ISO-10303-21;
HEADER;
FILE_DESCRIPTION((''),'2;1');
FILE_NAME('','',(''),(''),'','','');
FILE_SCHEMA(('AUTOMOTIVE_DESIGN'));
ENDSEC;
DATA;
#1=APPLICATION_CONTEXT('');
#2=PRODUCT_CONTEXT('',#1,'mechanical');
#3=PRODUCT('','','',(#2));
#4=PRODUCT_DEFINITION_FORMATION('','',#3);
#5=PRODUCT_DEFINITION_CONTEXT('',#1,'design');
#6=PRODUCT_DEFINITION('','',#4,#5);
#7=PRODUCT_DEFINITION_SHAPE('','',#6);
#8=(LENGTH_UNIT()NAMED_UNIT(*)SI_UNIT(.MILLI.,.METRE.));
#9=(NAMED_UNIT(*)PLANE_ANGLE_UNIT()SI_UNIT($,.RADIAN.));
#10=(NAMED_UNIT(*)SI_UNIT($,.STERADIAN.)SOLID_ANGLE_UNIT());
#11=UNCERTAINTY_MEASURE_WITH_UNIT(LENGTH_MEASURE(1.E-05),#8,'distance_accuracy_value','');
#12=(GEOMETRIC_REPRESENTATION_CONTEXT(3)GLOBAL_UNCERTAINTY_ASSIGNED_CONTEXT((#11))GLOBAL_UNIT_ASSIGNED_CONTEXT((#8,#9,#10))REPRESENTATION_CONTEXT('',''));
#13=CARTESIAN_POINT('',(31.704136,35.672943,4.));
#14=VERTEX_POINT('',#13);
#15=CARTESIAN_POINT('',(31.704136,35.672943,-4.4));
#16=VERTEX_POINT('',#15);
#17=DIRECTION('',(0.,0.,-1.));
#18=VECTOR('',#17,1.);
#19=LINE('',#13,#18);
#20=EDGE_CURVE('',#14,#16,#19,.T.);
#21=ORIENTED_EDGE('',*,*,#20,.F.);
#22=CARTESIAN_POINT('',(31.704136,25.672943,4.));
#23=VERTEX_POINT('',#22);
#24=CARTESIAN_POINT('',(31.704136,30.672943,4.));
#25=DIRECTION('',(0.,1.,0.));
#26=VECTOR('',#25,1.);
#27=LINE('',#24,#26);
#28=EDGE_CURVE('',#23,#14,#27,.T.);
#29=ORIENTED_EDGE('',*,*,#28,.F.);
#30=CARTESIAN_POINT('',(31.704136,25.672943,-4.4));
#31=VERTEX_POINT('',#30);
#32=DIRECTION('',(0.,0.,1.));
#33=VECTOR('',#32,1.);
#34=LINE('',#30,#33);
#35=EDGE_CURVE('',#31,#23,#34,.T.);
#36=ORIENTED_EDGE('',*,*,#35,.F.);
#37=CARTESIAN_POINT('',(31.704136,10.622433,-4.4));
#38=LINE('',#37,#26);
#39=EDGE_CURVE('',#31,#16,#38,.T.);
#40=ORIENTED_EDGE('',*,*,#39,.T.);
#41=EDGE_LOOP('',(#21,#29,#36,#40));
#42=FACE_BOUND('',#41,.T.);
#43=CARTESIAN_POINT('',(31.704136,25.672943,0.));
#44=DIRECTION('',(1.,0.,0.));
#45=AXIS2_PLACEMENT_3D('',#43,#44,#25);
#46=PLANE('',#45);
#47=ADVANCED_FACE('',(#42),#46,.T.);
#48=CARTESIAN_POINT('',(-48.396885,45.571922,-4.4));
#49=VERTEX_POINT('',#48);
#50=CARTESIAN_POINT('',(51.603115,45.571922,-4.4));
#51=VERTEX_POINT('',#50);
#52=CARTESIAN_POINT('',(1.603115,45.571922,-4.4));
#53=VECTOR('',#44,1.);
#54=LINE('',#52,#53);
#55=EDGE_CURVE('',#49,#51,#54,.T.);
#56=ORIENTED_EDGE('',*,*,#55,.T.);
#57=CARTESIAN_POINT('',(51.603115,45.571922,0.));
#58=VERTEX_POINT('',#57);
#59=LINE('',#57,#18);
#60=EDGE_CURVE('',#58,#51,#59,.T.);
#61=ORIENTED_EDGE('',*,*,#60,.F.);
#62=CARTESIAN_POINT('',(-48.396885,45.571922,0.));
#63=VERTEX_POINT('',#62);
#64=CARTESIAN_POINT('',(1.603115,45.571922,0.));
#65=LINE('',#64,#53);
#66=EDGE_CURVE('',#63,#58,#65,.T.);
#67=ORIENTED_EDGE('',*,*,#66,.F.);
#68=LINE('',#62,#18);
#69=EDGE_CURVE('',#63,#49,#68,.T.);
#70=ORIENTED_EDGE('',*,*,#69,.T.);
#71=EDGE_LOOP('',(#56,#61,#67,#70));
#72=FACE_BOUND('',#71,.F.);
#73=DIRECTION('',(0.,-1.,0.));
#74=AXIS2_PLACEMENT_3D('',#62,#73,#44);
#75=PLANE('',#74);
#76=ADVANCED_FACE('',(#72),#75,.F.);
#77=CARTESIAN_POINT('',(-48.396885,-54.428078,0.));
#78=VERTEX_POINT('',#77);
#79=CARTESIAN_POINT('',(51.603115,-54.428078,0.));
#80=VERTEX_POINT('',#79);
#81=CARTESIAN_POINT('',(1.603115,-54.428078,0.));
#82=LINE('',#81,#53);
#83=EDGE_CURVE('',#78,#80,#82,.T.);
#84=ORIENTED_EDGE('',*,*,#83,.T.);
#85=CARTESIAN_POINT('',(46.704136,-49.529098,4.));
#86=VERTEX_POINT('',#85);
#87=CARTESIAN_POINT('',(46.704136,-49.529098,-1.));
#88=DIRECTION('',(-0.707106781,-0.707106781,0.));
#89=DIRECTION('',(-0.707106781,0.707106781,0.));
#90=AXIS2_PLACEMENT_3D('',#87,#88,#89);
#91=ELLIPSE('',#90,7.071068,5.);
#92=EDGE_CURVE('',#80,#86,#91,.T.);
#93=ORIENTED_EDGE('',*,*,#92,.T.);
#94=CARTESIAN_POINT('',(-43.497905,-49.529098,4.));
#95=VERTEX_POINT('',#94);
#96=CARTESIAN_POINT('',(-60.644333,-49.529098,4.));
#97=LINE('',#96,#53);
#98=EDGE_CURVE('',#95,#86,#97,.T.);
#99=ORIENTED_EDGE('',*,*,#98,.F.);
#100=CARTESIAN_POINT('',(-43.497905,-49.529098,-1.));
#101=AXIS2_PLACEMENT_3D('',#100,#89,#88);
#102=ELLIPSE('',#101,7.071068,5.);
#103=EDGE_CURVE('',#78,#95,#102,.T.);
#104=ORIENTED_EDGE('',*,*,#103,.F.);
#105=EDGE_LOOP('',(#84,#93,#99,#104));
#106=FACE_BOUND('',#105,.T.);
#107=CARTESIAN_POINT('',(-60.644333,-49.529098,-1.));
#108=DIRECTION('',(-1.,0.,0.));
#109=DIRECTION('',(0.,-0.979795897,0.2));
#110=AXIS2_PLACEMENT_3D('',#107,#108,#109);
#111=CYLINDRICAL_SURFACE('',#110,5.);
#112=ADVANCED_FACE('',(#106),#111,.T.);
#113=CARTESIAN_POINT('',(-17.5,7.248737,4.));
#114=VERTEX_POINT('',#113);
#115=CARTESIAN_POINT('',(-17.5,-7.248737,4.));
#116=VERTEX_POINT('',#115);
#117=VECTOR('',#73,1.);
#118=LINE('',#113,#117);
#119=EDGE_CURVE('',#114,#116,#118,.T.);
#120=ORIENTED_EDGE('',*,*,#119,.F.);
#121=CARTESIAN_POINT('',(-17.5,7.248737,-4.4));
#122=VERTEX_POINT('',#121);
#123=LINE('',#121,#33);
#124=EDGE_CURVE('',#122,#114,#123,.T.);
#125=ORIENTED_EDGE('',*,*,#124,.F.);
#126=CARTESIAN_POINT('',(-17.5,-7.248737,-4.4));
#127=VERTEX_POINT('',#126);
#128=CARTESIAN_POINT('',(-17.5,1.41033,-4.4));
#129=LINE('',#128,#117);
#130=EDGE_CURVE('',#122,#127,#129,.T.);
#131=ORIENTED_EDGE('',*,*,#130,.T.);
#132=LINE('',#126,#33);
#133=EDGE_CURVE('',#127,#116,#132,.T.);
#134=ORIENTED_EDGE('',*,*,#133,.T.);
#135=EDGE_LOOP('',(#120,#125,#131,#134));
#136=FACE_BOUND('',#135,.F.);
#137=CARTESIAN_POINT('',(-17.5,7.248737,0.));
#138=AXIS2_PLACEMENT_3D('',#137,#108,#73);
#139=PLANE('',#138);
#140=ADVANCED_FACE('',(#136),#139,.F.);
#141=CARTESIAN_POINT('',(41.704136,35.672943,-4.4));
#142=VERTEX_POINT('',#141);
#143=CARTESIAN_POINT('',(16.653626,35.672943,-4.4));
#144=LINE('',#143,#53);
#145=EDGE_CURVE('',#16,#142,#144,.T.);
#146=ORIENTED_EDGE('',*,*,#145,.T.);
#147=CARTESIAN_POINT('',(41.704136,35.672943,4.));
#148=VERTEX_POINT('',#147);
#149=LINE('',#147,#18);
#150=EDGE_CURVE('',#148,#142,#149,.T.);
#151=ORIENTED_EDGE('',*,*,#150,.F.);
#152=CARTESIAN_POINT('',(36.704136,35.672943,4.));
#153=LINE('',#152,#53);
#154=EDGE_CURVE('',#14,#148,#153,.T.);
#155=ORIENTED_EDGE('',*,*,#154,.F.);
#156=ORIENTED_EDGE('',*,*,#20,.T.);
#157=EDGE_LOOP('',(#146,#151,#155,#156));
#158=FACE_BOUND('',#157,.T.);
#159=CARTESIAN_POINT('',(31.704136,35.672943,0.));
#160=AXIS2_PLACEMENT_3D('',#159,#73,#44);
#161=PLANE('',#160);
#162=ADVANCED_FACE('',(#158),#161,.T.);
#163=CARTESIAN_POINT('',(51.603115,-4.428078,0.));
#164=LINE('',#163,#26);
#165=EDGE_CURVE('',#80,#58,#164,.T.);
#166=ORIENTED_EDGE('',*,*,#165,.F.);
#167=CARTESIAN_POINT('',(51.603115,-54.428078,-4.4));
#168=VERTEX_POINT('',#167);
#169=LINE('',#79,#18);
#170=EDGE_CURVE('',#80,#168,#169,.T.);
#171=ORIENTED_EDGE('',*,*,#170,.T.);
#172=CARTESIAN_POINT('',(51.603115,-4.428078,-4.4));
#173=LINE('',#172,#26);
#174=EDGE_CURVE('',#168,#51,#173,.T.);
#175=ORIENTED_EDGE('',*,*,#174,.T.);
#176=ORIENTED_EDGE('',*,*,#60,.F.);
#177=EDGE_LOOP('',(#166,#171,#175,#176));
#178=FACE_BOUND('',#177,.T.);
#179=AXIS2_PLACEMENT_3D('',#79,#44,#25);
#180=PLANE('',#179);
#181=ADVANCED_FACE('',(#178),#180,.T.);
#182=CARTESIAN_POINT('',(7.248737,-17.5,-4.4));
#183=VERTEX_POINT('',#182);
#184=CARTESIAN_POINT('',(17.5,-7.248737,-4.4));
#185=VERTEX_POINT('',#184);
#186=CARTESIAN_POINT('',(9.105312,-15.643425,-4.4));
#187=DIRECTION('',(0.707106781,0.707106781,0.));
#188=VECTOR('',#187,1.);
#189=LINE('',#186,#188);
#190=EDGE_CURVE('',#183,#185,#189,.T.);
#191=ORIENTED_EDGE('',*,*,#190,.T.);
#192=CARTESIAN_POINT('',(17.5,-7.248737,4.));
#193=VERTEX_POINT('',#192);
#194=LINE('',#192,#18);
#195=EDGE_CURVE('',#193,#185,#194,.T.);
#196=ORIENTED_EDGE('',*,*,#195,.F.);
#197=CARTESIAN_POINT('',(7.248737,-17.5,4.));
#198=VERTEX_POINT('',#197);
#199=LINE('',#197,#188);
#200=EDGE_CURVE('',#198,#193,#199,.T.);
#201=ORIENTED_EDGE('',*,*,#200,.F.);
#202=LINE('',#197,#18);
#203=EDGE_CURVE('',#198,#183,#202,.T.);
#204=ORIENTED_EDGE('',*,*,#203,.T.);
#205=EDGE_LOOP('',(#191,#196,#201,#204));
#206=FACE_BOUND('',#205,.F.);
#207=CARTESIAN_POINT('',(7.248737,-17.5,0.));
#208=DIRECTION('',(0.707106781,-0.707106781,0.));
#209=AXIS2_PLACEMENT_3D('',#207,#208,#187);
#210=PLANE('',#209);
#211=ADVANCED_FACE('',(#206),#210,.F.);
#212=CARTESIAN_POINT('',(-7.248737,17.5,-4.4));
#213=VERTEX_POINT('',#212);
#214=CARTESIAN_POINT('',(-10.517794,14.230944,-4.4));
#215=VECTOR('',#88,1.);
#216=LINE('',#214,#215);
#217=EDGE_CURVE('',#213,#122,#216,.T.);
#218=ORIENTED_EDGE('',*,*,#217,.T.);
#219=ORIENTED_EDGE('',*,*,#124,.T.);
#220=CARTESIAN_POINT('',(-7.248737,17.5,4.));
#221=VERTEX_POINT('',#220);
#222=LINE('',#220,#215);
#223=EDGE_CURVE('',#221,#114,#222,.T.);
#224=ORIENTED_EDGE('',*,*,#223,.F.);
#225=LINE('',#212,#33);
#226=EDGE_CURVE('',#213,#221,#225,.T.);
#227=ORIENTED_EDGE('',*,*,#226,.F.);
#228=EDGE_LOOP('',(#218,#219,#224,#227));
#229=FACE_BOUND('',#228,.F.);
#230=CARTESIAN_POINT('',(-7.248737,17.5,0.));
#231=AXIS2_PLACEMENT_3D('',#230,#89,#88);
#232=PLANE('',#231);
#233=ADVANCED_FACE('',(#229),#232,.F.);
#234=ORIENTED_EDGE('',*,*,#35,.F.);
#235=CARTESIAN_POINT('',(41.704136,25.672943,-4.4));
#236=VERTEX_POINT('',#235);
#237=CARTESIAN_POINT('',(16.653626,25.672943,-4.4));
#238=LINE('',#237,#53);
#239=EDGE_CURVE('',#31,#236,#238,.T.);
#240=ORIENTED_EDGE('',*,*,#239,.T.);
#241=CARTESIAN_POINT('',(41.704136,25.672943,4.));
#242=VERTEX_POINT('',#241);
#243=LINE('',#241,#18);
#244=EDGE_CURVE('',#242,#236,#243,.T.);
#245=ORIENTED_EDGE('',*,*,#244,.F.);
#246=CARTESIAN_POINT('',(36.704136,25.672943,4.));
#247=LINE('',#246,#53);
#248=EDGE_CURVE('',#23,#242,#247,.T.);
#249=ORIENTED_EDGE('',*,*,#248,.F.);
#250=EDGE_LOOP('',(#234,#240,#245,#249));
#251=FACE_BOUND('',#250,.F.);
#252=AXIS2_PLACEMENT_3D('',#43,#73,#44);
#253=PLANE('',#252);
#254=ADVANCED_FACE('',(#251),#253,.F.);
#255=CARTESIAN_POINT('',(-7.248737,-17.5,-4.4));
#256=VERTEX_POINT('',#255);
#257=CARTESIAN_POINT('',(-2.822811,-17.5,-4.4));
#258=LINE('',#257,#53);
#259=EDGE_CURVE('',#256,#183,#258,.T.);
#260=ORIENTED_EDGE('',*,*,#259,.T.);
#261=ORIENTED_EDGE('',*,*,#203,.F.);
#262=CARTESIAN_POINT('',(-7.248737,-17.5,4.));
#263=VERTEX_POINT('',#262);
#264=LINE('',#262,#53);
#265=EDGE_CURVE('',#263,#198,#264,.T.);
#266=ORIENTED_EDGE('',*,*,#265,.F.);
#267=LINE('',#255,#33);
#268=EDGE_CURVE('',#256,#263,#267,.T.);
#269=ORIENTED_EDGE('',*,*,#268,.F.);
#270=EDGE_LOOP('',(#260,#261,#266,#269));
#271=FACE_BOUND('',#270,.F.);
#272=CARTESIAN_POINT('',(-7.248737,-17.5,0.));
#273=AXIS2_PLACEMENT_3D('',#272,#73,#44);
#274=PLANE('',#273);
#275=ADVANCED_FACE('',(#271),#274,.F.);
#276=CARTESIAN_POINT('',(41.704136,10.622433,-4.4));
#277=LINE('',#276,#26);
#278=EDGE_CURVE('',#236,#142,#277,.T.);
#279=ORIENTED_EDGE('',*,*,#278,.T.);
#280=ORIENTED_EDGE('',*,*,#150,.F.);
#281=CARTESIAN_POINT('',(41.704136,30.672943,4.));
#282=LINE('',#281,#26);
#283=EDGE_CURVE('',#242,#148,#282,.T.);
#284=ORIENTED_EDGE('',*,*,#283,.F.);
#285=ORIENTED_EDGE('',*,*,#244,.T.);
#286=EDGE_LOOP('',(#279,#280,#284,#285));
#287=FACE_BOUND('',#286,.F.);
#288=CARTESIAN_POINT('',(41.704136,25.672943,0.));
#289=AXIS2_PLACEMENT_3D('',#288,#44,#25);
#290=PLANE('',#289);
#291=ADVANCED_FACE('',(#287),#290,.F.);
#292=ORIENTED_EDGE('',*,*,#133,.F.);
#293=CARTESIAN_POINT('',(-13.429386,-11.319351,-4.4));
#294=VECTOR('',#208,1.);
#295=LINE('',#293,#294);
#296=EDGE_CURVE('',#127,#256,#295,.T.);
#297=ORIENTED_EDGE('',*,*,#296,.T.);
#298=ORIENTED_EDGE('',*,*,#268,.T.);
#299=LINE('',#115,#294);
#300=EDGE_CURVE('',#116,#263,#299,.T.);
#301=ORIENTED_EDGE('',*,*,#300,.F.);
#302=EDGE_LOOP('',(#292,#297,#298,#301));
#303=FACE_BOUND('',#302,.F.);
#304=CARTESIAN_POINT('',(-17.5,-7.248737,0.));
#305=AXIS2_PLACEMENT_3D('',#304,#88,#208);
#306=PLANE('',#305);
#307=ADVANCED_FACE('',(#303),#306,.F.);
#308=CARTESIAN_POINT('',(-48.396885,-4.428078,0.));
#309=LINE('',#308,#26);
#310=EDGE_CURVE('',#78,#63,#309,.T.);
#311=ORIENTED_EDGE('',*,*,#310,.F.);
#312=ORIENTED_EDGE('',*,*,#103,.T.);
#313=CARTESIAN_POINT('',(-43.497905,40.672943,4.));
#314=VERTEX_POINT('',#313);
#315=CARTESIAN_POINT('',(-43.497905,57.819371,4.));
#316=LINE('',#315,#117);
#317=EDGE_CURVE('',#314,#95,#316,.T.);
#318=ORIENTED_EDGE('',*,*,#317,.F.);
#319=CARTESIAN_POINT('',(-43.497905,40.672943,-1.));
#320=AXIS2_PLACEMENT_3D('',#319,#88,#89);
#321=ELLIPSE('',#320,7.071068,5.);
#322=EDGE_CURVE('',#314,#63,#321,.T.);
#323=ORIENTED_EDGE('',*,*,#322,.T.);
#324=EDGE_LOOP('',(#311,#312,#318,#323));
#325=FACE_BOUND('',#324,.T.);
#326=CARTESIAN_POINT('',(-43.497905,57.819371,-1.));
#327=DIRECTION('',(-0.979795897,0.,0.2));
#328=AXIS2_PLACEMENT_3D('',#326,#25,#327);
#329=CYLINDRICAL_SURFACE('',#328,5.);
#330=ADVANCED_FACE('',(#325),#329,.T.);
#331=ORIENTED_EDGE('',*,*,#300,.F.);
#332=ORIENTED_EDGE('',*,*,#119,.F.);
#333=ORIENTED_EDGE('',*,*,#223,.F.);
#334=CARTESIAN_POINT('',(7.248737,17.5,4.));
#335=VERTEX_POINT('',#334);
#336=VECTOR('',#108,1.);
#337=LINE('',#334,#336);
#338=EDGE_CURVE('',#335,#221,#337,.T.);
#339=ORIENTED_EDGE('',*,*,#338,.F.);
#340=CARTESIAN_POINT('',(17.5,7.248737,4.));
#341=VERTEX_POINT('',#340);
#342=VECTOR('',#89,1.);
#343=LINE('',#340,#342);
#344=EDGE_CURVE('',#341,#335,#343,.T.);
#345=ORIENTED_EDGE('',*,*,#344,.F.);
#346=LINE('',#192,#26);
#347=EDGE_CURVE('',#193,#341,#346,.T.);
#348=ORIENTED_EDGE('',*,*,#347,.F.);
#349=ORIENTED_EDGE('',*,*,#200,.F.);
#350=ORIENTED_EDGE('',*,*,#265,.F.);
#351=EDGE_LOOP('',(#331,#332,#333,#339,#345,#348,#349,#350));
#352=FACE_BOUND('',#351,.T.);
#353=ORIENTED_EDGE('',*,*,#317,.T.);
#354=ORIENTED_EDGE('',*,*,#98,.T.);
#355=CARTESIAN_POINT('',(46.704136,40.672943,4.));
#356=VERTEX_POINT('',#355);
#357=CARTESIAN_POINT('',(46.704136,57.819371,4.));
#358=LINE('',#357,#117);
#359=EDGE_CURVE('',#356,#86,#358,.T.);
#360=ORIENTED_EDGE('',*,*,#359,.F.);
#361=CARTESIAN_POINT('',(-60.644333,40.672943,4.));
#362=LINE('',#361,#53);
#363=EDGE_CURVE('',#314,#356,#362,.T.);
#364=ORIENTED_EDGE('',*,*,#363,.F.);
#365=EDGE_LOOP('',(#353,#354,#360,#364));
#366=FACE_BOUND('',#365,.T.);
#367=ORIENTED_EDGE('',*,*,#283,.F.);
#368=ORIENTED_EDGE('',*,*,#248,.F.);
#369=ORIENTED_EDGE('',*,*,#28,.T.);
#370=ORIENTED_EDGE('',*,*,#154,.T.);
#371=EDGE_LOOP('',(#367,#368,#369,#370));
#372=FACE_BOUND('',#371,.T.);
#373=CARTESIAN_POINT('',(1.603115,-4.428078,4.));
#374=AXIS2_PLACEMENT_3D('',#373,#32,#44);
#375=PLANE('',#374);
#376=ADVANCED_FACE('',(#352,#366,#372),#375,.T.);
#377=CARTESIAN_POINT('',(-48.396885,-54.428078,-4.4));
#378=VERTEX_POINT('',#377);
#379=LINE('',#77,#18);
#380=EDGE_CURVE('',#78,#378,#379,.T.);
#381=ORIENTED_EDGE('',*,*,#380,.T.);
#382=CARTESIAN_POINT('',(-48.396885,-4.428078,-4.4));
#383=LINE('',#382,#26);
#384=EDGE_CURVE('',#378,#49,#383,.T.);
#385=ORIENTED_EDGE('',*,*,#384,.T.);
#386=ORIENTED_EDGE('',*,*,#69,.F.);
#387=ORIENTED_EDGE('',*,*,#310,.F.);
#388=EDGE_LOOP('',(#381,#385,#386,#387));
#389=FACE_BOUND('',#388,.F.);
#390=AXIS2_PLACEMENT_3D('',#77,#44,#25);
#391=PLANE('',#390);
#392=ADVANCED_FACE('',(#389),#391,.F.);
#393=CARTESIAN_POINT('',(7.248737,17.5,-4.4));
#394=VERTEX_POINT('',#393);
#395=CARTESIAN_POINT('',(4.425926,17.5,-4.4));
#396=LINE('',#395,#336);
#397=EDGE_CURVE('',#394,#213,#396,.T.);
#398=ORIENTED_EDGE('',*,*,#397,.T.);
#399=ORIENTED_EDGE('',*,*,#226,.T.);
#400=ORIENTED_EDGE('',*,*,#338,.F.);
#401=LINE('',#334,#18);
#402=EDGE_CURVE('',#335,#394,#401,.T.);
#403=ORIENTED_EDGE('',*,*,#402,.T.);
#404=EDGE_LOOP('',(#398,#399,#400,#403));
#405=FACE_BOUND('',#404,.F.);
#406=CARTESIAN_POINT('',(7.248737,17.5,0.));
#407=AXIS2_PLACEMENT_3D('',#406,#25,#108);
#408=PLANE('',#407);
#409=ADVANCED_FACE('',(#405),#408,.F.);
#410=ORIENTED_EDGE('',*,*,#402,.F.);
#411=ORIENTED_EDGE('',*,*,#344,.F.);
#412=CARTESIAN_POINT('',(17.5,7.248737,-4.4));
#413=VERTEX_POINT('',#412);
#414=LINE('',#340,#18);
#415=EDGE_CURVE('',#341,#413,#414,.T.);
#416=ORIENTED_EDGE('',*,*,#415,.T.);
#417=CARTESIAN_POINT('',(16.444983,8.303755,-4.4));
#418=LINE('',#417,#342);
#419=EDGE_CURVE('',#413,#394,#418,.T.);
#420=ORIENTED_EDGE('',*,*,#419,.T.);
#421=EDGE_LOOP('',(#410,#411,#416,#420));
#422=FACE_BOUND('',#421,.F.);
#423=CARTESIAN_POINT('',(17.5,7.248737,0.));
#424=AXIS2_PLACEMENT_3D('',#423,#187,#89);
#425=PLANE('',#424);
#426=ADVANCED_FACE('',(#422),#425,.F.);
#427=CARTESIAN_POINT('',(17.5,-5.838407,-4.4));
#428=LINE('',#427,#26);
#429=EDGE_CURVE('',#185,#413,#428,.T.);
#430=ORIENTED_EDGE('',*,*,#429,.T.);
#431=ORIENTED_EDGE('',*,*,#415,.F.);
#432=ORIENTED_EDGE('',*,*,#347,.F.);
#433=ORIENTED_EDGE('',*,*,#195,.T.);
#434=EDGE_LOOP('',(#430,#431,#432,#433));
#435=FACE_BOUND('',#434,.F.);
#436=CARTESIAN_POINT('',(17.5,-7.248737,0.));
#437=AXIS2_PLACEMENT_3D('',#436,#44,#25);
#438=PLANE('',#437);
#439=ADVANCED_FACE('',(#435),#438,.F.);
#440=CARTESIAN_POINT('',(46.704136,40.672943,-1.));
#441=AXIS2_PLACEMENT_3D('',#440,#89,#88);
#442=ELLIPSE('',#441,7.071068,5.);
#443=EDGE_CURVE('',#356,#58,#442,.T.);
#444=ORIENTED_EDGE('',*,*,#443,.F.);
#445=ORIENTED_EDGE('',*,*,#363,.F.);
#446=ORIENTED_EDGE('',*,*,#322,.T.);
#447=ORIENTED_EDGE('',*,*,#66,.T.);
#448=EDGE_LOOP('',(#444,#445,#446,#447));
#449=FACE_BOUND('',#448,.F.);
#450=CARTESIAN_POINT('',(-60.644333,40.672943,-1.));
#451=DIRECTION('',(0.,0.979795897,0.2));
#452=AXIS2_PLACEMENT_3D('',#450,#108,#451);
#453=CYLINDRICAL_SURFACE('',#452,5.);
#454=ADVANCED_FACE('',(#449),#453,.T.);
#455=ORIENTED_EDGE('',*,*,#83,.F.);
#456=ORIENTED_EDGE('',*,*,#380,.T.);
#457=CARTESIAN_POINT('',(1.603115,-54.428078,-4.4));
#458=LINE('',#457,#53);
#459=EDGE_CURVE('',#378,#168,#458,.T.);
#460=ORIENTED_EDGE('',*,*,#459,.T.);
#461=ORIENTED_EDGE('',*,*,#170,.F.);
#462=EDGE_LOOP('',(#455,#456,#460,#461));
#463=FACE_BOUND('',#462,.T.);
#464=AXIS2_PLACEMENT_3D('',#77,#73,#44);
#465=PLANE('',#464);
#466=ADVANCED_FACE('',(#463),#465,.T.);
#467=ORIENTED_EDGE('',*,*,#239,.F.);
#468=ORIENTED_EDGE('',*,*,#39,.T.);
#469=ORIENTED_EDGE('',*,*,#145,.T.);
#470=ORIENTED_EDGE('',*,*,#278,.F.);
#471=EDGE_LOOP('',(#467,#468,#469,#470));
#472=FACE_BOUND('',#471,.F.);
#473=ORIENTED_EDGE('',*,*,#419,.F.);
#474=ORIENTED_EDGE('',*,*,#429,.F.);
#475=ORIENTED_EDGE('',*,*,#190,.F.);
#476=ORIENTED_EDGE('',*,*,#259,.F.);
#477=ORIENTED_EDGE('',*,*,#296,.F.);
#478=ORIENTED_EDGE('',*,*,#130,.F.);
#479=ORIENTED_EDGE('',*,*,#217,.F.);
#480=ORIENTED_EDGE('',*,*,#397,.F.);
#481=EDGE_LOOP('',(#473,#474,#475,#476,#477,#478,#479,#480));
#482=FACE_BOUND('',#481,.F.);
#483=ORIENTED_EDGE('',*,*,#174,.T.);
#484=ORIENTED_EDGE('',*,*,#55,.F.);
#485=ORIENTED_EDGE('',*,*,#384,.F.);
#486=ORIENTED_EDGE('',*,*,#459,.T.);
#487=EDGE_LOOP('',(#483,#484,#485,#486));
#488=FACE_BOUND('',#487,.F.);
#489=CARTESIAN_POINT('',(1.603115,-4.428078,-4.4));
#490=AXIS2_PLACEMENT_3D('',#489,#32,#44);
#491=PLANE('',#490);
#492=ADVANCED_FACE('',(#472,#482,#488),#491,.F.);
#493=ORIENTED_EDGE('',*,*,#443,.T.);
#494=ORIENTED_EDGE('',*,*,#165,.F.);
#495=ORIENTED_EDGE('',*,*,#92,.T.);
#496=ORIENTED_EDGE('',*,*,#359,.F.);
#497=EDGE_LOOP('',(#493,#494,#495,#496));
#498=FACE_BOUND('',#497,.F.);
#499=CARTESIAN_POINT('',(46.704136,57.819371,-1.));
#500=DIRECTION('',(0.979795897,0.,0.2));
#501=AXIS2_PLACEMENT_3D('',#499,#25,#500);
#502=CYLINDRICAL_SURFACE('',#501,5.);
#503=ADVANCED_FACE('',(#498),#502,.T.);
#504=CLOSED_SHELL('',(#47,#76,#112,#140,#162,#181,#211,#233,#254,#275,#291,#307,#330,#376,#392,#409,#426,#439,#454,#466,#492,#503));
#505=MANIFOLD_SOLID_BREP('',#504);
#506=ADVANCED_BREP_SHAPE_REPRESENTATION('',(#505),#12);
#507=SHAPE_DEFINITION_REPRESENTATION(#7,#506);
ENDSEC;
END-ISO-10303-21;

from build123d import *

# Parameters (mm, degrees)
F0_W        = 100
F0_H        = 100
F1_DEPTH    = 4
F3_T1_DEPTH = 124.4948974279
F3_T3_DEPTH = 124.4948974279
F5_DEPTH    = 25
F4_W        = 10
F4_H        = 10
F6_DEPTH    = 25
F7_DEPTH    = 4.4


# Not quite as in the source:
# - a fillet or chamfer that OpenCascade refuses, or shapes differently, is made with other operations: its cross-section is extruded or revolved along the edge and cut away or added


with BuildPart() as f1:
    # F0 (on Top) → F1 (new body)
    with BuildSketch(Plane.XY):
        with Locations((1.60311535, -4.4280775759)):
            Rectangle(F0_W, F0_H)
    extrude(amount=F1_DEPTH)

    # F3: fillet of radius 5 on 4 edges, made by hand

    # F3_s2 → F3_t1 (cut)
    with BuildSketch(Plane.YZ.offset(-60.6443333639)):
        with BuildLine():
            ThreePointArc((-54.4280775759, 0), (-52.6913757505, 2.8729833462), (-49.5290980903, 4))
            Line((-49.5290980903, 4), (-54.4280775759, 4))
            Line((-54.4280775759, 4), (-54.4280775759, 0))
        make_face()
        with BuildLine():
            ThreePointArc((45.5719224241, 0), (43.8352205987, 2.8729833462), (40.6729429385, 4))
            Line((40.6729429385, 4), (45.5719224241, 4))
            Line((45.5719224241, 4), (45.5719224241, 0))
        make_face()
    extrude(amount=F3_T1_DEPTH, mode=Mode.SUBTRACT)

    # F3_s4 → F3_t3 (cut)
    with BuildSketch(Plane.XZ.offset(-57.819371138)):
        with BuildLine():
            ThreePointArc((51.60311535, 0), (49.8664135246, 2.8729833462), (46.7041358644, 4))
            Line((46.7041358644, 4), (51.60311535, 4))
            Line((51.60311535, 4), (51.60311535, 0))
        make_face()
        with BuildLine():
            ThreePointArc((-48.39688465, 0), (-46.6601828246, 2.8729833462), (-43.4979051644, 4))
            Line((-43.4979051644, 4), (-48.39688465, 4))
            Line((-48.39688465, 4), (-48.39688465, 0))
        make_face()
    extrude(amount=F3_T3_DEPTH, mode=Mode.SUBTRACT)

    # F2 (on face) → F5 (cut)
    with BuildSketch(Plane.XY.offset(4)):
        Polygon((-7.2487373415, -17.5), (7.2487373415, -17.5), (17.5, -7.2487373415), (17.5, 7.2487373415), (7.2487373415, 17.5), (-7.2487373415, 17.5), (-17.5, 7.2487373415), (-17.5, -7.2487373415), align=None)
    extrude(amount=-F5_DEPTH, mode=Mode.SUBTRACT)

    # F4 (on face) → F6 (cut)
    with BuildSketch(Plane.XY.offset(4)):
        with Locations((36.7041358644, 30.6729429385)):
            Rectangle(F4_W, F4_H)
    extrude(amount=-F6_DEPTH, mode=Mode.SUBTRACT)

    # F7 (add): a face of the model
    f7_faces = [f1.faces().sort_by_distance(p)[0] for p in [
        (1.60311535, -53.0138640135, 0),
    ]]
    extrude(f7_faces, amount=F7_DEPTH)


solid = f1.part
